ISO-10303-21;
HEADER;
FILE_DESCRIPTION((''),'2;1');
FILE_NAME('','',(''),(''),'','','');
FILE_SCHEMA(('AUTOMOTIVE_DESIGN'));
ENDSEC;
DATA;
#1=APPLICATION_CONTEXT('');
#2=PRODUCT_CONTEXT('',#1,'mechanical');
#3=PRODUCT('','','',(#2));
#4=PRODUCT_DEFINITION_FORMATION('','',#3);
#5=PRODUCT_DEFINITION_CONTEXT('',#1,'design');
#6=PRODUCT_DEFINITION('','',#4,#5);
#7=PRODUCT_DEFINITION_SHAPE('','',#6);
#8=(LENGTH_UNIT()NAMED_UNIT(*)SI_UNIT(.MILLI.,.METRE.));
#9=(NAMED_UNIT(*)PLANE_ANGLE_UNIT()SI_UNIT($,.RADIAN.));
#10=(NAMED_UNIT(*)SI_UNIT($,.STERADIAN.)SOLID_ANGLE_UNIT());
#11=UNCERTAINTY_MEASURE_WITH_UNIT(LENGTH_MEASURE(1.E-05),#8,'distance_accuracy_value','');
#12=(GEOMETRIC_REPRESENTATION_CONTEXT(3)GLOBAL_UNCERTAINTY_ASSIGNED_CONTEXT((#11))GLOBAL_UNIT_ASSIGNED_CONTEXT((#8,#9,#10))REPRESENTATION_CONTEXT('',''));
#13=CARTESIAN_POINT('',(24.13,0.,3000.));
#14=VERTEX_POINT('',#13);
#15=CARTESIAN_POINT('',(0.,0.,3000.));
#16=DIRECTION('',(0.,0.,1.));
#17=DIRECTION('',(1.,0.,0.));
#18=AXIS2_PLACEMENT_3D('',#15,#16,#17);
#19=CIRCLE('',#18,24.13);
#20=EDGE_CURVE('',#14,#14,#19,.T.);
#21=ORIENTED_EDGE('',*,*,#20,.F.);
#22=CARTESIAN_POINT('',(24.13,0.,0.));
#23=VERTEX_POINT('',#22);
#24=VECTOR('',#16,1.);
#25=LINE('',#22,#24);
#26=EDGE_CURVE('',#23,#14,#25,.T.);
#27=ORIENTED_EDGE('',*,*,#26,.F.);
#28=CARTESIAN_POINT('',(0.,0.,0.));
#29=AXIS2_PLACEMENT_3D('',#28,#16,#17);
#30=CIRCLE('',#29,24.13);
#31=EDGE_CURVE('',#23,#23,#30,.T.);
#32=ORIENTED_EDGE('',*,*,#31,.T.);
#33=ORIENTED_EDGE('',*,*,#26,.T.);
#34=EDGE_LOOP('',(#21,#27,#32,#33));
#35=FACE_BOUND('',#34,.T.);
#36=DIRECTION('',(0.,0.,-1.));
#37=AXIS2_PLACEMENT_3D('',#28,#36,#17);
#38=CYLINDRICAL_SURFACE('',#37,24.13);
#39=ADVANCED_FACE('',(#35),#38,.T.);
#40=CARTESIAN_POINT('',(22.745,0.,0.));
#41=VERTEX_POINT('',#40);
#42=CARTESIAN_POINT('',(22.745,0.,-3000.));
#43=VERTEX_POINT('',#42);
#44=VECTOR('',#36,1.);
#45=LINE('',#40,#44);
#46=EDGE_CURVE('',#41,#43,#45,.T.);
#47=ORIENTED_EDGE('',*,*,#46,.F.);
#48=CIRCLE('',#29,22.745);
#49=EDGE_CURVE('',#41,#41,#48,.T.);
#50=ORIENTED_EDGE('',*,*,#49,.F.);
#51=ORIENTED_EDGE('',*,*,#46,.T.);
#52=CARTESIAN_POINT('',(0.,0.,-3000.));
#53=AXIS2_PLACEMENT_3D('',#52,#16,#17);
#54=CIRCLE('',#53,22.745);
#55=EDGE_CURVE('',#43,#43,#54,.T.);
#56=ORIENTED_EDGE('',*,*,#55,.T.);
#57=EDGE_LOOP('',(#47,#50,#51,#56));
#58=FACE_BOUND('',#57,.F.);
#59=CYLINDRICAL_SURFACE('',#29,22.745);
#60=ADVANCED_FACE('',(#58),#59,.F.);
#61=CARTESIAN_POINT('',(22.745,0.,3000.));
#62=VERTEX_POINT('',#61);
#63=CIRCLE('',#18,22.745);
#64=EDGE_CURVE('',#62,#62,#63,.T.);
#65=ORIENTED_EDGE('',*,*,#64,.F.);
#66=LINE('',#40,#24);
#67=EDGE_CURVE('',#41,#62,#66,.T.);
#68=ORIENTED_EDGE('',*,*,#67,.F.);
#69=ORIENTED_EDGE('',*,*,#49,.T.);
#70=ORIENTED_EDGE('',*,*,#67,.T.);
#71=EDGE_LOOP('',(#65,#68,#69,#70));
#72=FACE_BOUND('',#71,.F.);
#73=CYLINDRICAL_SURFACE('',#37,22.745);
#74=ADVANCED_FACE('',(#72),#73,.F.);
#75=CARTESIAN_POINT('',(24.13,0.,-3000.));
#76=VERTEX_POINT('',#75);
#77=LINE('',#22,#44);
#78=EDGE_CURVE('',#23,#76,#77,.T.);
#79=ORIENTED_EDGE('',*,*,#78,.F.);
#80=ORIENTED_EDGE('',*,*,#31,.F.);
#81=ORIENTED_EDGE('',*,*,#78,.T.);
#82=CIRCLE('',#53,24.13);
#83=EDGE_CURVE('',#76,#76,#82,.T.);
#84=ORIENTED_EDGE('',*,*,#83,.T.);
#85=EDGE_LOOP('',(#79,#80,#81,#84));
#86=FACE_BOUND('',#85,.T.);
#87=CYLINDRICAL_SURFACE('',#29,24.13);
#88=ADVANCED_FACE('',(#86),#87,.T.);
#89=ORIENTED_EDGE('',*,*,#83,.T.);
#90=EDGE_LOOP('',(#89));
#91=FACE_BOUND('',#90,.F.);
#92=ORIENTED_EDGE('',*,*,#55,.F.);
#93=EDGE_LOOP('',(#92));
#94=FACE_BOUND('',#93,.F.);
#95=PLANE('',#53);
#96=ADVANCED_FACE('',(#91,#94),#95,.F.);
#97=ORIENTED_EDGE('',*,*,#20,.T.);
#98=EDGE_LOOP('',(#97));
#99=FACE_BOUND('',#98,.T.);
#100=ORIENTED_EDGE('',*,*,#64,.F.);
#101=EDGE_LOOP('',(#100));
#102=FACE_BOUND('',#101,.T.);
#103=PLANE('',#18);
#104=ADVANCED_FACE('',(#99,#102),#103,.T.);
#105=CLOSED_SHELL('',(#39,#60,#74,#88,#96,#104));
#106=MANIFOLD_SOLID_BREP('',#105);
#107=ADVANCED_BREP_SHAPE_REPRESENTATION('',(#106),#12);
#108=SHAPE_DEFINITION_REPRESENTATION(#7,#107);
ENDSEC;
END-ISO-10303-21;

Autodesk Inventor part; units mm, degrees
ref_plane "YZ Plane" through (0, 0, 0) normal (1, 0, 0) x (0, 1, 0)
ref_plane "XZ Plane" through (0, 0, 0) normal (0, 1, 0) x (-1, 0, 0)
ref_plane "XY Plane" through (0, 0, 0) normal (0, 0, 1) x (1, 0, 0)
sketch "Schizzo1" plane through (0, 0, 0) normal (0, 0, 1) x (1, 0, 0)
  circle A0 centre (0, 0) radius 24.13
  circle A1 centre (0, 0) radius 22.745
  dimension "d0" = 48.26
  dimension "d1" = 45.49
extrude "Estrusione1" add sketch "Schizzo1" along normal mid plane 6000
properties part number "06-01-2023 Verga"
